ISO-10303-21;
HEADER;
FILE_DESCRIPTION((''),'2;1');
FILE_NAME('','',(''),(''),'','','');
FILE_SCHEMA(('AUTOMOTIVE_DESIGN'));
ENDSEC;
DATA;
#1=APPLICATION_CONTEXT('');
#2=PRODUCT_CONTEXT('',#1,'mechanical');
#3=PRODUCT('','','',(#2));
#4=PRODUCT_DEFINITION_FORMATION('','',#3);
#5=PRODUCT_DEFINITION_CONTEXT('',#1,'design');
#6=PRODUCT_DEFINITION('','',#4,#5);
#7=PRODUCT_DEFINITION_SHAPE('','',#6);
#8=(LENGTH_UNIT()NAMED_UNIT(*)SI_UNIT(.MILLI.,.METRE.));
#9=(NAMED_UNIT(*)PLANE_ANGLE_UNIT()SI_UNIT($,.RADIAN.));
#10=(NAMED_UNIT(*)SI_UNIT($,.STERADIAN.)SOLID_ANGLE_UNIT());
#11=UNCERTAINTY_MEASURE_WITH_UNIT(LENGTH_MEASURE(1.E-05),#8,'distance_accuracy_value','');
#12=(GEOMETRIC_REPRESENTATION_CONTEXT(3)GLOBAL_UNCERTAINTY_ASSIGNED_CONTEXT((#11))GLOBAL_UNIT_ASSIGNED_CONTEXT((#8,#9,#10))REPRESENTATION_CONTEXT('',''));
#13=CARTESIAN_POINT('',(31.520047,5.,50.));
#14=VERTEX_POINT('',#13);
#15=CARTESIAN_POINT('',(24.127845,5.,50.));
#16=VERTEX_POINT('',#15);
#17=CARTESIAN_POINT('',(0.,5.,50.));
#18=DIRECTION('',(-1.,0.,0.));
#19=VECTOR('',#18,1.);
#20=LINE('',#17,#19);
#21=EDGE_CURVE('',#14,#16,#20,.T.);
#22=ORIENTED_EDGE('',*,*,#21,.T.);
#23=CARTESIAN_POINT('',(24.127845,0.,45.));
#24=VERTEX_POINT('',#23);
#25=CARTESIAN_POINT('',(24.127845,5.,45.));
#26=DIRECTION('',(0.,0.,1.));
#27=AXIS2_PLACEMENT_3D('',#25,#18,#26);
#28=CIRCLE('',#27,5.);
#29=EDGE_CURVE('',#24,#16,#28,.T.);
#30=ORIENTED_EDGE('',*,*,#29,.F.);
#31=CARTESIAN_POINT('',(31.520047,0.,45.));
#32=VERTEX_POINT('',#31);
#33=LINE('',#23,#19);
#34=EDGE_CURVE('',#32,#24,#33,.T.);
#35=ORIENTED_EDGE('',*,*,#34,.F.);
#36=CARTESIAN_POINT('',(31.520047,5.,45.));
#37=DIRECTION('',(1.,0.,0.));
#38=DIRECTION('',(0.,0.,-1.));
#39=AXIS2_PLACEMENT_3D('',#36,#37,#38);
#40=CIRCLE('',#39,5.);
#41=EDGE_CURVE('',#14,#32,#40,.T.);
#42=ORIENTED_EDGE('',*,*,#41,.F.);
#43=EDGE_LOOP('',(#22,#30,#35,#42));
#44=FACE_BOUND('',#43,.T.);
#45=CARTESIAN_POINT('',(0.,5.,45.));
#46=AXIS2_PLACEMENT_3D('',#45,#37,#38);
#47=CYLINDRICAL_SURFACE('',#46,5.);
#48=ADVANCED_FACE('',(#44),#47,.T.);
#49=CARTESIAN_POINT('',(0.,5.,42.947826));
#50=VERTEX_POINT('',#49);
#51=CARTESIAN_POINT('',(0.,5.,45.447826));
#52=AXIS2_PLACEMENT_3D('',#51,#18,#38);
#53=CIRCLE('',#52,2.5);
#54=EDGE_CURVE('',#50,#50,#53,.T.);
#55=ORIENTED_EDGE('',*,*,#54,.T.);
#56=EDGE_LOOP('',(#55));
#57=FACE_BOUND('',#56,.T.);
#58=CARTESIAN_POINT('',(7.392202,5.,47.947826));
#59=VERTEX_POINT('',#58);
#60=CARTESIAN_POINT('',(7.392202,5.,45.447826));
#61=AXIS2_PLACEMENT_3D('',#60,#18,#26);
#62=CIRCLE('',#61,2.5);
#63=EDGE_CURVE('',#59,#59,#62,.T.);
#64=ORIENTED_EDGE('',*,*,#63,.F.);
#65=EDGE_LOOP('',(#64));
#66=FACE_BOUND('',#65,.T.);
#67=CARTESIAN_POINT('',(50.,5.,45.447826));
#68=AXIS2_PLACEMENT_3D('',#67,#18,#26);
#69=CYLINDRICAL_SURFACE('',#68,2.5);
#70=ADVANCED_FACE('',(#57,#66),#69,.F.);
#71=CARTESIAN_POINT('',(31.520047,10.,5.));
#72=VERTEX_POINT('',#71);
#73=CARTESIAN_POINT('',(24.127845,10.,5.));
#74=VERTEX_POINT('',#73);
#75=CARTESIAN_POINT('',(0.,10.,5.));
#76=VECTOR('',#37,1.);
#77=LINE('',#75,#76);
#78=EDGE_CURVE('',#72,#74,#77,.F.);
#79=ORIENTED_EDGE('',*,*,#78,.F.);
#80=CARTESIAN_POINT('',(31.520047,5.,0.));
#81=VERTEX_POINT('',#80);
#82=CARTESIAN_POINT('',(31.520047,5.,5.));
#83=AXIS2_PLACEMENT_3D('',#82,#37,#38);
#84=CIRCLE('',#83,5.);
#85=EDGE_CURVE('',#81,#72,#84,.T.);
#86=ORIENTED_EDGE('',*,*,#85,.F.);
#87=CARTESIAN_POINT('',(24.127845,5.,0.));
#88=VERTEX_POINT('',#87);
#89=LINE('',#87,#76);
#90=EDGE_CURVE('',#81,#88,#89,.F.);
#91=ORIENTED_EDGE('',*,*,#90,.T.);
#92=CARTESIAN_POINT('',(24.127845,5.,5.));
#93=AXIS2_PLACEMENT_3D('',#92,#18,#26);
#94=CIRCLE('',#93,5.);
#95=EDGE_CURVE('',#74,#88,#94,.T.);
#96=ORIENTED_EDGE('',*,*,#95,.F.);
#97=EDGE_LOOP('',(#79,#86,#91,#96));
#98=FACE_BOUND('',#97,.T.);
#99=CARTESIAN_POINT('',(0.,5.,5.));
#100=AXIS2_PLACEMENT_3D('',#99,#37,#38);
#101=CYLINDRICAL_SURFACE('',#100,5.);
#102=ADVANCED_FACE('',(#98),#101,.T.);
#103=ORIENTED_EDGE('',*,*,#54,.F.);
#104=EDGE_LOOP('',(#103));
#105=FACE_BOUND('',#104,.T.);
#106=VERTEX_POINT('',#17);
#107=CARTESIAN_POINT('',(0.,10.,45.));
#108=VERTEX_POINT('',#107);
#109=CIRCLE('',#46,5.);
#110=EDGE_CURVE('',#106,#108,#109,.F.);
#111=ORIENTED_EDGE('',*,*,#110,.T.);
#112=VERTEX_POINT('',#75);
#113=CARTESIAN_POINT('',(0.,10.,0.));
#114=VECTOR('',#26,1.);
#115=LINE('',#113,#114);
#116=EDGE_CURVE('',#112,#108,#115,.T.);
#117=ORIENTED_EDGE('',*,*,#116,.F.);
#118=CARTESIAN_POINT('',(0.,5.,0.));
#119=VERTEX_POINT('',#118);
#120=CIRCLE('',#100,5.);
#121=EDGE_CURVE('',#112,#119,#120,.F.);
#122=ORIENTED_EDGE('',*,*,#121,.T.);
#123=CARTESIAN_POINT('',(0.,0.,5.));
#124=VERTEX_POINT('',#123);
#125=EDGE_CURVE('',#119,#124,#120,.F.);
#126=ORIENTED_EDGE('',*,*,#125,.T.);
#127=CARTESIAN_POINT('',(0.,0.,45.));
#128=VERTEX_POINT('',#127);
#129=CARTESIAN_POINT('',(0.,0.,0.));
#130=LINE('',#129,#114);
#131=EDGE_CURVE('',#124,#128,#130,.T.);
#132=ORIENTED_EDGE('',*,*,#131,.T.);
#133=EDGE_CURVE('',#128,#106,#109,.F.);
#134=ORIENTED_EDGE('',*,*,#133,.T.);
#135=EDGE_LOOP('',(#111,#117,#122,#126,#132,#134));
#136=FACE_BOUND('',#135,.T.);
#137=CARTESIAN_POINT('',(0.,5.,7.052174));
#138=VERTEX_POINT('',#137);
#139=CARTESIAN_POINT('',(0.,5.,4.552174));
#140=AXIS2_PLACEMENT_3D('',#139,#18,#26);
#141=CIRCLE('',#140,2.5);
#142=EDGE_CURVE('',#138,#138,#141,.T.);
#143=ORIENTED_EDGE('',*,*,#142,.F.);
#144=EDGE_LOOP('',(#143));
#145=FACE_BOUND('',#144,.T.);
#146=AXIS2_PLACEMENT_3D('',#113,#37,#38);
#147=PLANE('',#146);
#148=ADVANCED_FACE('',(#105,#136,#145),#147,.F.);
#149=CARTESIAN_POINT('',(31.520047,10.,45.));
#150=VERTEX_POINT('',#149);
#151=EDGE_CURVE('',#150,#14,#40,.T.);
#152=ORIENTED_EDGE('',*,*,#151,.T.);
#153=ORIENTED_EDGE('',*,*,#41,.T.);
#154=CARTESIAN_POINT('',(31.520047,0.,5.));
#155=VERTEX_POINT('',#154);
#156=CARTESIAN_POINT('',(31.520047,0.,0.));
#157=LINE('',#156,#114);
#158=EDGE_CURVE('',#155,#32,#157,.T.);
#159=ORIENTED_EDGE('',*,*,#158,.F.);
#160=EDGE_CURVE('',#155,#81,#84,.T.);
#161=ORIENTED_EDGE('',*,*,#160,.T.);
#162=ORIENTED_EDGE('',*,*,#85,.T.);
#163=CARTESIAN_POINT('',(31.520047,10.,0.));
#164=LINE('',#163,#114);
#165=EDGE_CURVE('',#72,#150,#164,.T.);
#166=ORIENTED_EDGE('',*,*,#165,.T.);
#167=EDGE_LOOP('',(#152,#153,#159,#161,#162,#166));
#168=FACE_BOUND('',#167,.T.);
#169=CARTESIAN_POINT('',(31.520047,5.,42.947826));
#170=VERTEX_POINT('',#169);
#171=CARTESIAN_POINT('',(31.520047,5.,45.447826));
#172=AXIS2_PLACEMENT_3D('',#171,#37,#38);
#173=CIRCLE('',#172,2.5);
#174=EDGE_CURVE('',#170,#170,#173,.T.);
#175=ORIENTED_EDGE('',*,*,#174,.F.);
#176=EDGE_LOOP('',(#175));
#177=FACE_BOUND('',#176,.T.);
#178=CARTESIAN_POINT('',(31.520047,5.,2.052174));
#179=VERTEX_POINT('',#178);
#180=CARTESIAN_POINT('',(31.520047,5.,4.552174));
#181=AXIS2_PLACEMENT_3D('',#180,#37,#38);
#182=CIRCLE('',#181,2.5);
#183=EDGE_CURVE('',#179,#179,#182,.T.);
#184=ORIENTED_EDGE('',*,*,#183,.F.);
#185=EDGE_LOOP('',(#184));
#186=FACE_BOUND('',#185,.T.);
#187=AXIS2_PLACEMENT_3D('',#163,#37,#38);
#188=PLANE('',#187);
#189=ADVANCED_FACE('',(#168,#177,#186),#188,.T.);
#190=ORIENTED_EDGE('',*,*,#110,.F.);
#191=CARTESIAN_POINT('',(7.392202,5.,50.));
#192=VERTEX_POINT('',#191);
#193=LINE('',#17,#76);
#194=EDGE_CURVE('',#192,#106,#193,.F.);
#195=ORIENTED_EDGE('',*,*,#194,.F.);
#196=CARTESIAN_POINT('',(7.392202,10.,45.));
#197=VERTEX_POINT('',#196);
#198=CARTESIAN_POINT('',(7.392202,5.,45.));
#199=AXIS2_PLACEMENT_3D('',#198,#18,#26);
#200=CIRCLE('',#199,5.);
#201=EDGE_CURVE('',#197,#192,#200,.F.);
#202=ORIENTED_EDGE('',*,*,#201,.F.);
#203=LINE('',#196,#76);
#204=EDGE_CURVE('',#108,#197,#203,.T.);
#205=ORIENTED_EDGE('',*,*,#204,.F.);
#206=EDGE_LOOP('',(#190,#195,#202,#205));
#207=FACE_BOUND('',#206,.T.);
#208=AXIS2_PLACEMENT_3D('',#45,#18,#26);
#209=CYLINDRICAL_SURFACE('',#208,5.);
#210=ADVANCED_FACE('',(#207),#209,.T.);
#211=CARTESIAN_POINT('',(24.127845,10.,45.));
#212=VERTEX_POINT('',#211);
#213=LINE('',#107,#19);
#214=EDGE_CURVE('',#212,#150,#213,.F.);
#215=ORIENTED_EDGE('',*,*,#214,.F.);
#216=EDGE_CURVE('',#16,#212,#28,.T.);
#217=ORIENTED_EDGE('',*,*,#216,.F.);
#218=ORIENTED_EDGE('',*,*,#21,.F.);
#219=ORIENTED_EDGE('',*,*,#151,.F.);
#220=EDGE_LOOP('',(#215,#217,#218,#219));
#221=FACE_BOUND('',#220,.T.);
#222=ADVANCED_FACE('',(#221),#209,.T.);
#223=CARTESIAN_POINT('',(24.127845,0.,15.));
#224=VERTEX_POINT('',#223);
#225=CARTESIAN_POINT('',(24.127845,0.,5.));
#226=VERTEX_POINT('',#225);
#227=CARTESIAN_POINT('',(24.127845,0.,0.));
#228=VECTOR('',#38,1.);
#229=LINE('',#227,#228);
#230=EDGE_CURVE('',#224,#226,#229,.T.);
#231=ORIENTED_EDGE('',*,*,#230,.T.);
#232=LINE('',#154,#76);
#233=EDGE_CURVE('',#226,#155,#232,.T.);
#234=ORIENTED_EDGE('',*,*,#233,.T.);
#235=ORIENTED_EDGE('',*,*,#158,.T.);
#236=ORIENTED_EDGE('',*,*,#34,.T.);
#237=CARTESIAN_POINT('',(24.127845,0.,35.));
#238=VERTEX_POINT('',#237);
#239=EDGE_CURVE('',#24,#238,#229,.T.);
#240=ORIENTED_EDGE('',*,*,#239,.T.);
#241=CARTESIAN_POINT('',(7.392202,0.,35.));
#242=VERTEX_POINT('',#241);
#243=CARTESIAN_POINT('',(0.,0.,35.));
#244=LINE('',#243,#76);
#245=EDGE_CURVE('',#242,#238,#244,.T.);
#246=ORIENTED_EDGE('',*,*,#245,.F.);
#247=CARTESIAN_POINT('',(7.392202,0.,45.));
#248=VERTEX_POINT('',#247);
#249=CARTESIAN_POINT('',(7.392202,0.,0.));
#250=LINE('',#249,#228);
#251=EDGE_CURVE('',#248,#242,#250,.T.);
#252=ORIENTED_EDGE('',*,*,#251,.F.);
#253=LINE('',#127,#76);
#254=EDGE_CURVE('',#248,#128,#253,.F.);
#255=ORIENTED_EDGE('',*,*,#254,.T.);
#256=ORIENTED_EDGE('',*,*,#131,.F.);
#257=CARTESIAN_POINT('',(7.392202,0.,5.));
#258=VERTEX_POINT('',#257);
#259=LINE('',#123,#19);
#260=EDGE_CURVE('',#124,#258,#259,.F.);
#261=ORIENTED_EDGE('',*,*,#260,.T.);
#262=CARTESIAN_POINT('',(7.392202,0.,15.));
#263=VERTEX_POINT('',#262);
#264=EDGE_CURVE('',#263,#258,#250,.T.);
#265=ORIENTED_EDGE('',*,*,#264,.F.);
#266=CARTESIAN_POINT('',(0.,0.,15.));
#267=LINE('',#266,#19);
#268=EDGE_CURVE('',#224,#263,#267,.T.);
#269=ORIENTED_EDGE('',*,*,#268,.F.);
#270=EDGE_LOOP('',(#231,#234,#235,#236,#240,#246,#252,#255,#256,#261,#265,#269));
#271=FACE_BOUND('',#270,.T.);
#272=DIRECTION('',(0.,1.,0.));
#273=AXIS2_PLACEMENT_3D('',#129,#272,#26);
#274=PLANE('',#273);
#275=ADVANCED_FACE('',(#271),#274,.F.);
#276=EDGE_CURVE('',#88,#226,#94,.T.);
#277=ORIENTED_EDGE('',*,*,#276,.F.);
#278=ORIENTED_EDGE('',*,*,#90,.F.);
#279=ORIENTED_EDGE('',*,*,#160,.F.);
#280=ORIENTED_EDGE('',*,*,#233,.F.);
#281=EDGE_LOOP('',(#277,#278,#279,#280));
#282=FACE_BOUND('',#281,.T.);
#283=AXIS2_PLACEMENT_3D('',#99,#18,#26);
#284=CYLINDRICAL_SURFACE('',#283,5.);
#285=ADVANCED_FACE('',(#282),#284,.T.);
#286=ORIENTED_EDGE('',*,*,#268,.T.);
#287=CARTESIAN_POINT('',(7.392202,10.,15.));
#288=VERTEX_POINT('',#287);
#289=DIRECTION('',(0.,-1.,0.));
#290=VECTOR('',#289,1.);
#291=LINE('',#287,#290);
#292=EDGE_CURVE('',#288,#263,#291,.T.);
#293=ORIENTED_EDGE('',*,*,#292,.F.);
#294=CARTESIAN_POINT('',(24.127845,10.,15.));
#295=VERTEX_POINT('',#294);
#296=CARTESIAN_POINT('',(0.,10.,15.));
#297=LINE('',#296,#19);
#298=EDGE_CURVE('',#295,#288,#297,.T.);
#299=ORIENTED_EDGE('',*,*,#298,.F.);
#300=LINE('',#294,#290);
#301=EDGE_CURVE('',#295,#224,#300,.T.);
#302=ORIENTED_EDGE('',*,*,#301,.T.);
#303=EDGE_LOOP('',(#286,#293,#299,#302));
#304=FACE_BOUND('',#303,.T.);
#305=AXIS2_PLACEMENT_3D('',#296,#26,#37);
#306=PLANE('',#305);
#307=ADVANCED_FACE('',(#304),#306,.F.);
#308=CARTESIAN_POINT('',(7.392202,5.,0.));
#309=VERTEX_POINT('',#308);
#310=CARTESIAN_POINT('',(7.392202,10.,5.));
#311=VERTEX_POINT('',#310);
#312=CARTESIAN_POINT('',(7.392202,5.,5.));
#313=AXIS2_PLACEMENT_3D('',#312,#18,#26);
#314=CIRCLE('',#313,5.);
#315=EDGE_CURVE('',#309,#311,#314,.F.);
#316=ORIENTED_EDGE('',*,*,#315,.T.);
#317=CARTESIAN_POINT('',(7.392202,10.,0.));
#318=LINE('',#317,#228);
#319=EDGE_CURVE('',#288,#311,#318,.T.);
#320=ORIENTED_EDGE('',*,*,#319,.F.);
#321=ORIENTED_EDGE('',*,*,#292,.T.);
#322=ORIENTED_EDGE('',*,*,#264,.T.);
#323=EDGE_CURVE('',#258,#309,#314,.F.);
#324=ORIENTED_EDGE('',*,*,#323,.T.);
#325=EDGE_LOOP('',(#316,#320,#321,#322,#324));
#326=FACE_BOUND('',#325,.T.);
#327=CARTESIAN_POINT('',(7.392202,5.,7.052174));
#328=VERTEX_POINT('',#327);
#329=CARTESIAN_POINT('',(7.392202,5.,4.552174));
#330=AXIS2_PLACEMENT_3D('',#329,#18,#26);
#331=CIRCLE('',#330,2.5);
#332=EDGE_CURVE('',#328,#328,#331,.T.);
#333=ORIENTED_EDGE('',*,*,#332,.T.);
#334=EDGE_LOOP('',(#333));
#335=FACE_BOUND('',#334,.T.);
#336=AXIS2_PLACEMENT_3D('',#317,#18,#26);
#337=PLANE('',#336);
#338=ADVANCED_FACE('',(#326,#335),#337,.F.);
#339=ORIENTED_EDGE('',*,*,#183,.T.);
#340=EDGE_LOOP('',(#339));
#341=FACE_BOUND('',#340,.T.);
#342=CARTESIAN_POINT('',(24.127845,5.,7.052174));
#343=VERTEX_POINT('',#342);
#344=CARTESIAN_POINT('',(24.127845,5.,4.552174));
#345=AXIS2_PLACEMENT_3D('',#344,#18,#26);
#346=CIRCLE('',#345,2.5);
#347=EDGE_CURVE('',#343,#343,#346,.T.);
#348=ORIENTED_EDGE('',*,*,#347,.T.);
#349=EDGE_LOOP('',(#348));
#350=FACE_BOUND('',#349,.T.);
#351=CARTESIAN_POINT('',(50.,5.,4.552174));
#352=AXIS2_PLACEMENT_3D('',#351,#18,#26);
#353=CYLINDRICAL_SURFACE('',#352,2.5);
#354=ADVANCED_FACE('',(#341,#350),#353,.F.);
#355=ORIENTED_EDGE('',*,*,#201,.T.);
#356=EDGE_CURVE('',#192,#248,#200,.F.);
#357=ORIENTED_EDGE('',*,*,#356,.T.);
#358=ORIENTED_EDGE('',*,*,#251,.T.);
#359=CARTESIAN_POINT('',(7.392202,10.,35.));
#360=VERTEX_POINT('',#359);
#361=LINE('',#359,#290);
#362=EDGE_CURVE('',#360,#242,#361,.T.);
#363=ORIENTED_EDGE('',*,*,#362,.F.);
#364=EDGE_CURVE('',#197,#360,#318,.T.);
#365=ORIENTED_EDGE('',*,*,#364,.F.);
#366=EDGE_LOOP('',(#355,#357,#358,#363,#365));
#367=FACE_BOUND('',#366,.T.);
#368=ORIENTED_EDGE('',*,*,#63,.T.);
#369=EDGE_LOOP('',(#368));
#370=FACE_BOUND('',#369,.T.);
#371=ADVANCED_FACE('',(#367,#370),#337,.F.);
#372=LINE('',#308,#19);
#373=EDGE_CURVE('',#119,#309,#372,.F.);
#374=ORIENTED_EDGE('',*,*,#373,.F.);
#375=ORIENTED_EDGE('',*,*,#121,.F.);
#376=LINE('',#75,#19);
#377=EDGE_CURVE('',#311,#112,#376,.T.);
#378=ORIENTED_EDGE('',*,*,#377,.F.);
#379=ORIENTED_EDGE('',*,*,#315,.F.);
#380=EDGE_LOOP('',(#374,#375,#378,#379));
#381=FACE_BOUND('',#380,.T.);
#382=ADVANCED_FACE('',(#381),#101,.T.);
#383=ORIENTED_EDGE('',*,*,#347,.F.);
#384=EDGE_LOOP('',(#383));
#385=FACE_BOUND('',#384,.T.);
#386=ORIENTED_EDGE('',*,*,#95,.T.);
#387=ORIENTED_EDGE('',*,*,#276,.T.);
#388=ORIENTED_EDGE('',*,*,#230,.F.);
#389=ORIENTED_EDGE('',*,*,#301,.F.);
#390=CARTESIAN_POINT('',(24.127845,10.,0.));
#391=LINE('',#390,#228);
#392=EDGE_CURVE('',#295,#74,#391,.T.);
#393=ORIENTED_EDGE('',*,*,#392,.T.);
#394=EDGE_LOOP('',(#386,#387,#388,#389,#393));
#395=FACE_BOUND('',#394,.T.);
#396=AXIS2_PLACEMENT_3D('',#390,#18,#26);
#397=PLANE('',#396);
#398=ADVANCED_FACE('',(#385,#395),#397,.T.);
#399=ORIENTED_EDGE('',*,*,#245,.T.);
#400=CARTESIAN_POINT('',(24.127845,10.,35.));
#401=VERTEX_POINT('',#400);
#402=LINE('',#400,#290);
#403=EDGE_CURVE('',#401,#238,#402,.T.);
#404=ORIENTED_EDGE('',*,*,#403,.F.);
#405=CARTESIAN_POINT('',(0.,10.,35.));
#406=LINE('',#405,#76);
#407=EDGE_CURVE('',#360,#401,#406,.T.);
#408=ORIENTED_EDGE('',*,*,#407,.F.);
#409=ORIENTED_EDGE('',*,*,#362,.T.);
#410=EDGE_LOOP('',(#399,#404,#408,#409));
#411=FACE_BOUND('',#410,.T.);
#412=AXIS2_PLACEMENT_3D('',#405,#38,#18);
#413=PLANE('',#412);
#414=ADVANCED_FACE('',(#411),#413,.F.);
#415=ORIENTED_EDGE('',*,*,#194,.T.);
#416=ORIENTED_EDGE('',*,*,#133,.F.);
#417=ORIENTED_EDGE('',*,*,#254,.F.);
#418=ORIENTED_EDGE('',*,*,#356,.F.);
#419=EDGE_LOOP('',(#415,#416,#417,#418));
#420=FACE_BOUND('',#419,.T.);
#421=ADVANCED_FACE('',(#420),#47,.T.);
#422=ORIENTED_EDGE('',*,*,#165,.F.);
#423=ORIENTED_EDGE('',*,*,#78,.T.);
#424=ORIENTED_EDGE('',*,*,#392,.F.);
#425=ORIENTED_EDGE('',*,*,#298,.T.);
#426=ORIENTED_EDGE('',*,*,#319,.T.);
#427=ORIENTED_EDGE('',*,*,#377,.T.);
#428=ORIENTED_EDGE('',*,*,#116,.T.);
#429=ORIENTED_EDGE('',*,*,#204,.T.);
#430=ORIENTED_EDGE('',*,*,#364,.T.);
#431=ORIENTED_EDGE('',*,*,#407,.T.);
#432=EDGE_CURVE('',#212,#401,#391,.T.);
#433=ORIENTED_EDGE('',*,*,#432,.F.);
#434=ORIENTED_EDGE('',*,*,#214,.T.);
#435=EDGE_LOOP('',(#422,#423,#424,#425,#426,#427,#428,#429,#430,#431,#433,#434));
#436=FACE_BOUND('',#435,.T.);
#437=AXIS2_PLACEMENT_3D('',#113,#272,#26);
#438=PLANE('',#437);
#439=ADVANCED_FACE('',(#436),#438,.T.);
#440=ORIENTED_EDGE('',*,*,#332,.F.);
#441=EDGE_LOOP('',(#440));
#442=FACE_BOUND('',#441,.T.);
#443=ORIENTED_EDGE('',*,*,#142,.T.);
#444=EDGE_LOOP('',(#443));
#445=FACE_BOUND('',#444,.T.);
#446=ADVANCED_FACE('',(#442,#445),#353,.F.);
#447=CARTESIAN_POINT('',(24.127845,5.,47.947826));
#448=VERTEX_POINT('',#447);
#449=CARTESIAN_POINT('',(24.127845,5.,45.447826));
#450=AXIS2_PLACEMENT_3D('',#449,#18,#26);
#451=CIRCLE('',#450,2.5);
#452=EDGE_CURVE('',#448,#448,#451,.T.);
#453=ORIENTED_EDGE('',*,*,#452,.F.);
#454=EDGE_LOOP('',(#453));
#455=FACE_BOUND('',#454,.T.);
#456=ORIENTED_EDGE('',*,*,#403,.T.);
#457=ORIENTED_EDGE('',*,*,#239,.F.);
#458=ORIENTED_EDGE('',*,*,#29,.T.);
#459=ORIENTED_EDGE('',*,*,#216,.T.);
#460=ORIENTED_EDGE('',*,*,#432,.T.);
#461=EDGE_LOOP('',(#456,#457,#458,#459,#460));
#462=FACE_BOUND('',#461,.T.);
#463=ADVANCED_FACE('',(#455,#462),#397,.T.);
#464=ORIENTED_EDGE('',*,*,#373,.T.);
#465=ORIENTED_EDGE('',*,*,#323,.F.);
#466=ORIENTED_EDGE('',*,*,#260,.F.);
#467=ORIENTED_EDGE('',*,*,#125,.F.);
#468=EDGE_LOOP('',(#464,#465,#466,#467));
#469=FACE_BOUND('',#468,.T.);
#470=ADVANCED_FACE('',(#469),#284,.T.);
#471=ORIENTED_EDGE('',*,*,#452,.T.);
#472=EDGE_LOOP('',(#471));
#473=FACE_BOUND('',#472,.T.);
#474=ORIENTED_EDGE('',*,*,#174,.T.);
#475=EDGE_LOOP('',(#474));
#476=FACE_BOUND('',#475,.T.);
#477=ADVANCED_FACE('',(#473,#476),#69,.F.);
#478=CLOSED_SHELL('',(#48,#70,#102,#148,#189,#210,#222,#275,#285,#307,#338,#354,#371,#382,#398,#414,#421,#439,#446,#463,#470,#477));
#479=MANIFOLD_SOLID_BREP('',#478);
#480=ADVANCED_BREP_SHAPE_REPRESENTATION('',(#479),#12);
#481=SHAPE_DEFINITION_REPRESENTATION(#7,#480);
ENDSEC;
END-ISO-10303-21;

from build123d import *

# Parameters (mm, degrees)
BOSS_EXTRU_1_DEPTH      = 10
CONG_1_R                = 5
ESQUISSE2_R             = 2.5
ENL_V_MAT_EXTRU_1_DEPTH = 50


with BuildPart() as part:
    # Esquisse1 → Boss.-Extru.1 (new body)
    with BuildSketch(Plane(origin=(0, 0, 0), x_dir=(1, 0, 0), z_dir=(0, 1, 0))):
        Polygon((7.392201948, 0), (0, 0), (0, -50), (7.392201948, -50), (7.392201948, -35), (15.760023564, -35), (15.760023564, -15), (7.392201948, -15), align=None)
        Polygon((24.127845179, -15), (15.760023564, -15), (15.760023564, -35), (24.127845179, -35), (24.127845179, -50), (31.520047127, -50), (31.520047127, 0), (24.127845179, 0), align=None)
    extrude(amount=BOSS_EXTRU_1_DEPTH)

    # Congé1
    cong_1_edges = [part.edges().sort_by_distance(p)[0] for p in [
        (27.823946153, 0, 50),
        (3.696100974, 0, 50),
        (3.696100974, 10, 50),
        (27.823946153, 10, 50),
        (27.823946153, 10, 0),
        (27.823946153, 0, 0),
        (3.696100974, 0, 0),
        (3.696100974, 10, 0),
    ]]
    fillet(cong_1_edges, radius=CONG_1_R - 0.0001)  # a hair under: the kernel refuses the full size

    # Esquisse2 → Enlèv. mat.-Extru.1 (cut)
    with BuildSketch(Plane.ZY):
        with Locations((4.552174391, 5)):
            Circle(ESQUISSE2_R)
        with Locations((45.447825609, 5)):
            Circle(ESQUISSE2_R)
    extrude(amount=-ENL_V_MAT_EXTRU_1_DEPTH, mode=Mode.SUBTRACT)


solid = part.part
